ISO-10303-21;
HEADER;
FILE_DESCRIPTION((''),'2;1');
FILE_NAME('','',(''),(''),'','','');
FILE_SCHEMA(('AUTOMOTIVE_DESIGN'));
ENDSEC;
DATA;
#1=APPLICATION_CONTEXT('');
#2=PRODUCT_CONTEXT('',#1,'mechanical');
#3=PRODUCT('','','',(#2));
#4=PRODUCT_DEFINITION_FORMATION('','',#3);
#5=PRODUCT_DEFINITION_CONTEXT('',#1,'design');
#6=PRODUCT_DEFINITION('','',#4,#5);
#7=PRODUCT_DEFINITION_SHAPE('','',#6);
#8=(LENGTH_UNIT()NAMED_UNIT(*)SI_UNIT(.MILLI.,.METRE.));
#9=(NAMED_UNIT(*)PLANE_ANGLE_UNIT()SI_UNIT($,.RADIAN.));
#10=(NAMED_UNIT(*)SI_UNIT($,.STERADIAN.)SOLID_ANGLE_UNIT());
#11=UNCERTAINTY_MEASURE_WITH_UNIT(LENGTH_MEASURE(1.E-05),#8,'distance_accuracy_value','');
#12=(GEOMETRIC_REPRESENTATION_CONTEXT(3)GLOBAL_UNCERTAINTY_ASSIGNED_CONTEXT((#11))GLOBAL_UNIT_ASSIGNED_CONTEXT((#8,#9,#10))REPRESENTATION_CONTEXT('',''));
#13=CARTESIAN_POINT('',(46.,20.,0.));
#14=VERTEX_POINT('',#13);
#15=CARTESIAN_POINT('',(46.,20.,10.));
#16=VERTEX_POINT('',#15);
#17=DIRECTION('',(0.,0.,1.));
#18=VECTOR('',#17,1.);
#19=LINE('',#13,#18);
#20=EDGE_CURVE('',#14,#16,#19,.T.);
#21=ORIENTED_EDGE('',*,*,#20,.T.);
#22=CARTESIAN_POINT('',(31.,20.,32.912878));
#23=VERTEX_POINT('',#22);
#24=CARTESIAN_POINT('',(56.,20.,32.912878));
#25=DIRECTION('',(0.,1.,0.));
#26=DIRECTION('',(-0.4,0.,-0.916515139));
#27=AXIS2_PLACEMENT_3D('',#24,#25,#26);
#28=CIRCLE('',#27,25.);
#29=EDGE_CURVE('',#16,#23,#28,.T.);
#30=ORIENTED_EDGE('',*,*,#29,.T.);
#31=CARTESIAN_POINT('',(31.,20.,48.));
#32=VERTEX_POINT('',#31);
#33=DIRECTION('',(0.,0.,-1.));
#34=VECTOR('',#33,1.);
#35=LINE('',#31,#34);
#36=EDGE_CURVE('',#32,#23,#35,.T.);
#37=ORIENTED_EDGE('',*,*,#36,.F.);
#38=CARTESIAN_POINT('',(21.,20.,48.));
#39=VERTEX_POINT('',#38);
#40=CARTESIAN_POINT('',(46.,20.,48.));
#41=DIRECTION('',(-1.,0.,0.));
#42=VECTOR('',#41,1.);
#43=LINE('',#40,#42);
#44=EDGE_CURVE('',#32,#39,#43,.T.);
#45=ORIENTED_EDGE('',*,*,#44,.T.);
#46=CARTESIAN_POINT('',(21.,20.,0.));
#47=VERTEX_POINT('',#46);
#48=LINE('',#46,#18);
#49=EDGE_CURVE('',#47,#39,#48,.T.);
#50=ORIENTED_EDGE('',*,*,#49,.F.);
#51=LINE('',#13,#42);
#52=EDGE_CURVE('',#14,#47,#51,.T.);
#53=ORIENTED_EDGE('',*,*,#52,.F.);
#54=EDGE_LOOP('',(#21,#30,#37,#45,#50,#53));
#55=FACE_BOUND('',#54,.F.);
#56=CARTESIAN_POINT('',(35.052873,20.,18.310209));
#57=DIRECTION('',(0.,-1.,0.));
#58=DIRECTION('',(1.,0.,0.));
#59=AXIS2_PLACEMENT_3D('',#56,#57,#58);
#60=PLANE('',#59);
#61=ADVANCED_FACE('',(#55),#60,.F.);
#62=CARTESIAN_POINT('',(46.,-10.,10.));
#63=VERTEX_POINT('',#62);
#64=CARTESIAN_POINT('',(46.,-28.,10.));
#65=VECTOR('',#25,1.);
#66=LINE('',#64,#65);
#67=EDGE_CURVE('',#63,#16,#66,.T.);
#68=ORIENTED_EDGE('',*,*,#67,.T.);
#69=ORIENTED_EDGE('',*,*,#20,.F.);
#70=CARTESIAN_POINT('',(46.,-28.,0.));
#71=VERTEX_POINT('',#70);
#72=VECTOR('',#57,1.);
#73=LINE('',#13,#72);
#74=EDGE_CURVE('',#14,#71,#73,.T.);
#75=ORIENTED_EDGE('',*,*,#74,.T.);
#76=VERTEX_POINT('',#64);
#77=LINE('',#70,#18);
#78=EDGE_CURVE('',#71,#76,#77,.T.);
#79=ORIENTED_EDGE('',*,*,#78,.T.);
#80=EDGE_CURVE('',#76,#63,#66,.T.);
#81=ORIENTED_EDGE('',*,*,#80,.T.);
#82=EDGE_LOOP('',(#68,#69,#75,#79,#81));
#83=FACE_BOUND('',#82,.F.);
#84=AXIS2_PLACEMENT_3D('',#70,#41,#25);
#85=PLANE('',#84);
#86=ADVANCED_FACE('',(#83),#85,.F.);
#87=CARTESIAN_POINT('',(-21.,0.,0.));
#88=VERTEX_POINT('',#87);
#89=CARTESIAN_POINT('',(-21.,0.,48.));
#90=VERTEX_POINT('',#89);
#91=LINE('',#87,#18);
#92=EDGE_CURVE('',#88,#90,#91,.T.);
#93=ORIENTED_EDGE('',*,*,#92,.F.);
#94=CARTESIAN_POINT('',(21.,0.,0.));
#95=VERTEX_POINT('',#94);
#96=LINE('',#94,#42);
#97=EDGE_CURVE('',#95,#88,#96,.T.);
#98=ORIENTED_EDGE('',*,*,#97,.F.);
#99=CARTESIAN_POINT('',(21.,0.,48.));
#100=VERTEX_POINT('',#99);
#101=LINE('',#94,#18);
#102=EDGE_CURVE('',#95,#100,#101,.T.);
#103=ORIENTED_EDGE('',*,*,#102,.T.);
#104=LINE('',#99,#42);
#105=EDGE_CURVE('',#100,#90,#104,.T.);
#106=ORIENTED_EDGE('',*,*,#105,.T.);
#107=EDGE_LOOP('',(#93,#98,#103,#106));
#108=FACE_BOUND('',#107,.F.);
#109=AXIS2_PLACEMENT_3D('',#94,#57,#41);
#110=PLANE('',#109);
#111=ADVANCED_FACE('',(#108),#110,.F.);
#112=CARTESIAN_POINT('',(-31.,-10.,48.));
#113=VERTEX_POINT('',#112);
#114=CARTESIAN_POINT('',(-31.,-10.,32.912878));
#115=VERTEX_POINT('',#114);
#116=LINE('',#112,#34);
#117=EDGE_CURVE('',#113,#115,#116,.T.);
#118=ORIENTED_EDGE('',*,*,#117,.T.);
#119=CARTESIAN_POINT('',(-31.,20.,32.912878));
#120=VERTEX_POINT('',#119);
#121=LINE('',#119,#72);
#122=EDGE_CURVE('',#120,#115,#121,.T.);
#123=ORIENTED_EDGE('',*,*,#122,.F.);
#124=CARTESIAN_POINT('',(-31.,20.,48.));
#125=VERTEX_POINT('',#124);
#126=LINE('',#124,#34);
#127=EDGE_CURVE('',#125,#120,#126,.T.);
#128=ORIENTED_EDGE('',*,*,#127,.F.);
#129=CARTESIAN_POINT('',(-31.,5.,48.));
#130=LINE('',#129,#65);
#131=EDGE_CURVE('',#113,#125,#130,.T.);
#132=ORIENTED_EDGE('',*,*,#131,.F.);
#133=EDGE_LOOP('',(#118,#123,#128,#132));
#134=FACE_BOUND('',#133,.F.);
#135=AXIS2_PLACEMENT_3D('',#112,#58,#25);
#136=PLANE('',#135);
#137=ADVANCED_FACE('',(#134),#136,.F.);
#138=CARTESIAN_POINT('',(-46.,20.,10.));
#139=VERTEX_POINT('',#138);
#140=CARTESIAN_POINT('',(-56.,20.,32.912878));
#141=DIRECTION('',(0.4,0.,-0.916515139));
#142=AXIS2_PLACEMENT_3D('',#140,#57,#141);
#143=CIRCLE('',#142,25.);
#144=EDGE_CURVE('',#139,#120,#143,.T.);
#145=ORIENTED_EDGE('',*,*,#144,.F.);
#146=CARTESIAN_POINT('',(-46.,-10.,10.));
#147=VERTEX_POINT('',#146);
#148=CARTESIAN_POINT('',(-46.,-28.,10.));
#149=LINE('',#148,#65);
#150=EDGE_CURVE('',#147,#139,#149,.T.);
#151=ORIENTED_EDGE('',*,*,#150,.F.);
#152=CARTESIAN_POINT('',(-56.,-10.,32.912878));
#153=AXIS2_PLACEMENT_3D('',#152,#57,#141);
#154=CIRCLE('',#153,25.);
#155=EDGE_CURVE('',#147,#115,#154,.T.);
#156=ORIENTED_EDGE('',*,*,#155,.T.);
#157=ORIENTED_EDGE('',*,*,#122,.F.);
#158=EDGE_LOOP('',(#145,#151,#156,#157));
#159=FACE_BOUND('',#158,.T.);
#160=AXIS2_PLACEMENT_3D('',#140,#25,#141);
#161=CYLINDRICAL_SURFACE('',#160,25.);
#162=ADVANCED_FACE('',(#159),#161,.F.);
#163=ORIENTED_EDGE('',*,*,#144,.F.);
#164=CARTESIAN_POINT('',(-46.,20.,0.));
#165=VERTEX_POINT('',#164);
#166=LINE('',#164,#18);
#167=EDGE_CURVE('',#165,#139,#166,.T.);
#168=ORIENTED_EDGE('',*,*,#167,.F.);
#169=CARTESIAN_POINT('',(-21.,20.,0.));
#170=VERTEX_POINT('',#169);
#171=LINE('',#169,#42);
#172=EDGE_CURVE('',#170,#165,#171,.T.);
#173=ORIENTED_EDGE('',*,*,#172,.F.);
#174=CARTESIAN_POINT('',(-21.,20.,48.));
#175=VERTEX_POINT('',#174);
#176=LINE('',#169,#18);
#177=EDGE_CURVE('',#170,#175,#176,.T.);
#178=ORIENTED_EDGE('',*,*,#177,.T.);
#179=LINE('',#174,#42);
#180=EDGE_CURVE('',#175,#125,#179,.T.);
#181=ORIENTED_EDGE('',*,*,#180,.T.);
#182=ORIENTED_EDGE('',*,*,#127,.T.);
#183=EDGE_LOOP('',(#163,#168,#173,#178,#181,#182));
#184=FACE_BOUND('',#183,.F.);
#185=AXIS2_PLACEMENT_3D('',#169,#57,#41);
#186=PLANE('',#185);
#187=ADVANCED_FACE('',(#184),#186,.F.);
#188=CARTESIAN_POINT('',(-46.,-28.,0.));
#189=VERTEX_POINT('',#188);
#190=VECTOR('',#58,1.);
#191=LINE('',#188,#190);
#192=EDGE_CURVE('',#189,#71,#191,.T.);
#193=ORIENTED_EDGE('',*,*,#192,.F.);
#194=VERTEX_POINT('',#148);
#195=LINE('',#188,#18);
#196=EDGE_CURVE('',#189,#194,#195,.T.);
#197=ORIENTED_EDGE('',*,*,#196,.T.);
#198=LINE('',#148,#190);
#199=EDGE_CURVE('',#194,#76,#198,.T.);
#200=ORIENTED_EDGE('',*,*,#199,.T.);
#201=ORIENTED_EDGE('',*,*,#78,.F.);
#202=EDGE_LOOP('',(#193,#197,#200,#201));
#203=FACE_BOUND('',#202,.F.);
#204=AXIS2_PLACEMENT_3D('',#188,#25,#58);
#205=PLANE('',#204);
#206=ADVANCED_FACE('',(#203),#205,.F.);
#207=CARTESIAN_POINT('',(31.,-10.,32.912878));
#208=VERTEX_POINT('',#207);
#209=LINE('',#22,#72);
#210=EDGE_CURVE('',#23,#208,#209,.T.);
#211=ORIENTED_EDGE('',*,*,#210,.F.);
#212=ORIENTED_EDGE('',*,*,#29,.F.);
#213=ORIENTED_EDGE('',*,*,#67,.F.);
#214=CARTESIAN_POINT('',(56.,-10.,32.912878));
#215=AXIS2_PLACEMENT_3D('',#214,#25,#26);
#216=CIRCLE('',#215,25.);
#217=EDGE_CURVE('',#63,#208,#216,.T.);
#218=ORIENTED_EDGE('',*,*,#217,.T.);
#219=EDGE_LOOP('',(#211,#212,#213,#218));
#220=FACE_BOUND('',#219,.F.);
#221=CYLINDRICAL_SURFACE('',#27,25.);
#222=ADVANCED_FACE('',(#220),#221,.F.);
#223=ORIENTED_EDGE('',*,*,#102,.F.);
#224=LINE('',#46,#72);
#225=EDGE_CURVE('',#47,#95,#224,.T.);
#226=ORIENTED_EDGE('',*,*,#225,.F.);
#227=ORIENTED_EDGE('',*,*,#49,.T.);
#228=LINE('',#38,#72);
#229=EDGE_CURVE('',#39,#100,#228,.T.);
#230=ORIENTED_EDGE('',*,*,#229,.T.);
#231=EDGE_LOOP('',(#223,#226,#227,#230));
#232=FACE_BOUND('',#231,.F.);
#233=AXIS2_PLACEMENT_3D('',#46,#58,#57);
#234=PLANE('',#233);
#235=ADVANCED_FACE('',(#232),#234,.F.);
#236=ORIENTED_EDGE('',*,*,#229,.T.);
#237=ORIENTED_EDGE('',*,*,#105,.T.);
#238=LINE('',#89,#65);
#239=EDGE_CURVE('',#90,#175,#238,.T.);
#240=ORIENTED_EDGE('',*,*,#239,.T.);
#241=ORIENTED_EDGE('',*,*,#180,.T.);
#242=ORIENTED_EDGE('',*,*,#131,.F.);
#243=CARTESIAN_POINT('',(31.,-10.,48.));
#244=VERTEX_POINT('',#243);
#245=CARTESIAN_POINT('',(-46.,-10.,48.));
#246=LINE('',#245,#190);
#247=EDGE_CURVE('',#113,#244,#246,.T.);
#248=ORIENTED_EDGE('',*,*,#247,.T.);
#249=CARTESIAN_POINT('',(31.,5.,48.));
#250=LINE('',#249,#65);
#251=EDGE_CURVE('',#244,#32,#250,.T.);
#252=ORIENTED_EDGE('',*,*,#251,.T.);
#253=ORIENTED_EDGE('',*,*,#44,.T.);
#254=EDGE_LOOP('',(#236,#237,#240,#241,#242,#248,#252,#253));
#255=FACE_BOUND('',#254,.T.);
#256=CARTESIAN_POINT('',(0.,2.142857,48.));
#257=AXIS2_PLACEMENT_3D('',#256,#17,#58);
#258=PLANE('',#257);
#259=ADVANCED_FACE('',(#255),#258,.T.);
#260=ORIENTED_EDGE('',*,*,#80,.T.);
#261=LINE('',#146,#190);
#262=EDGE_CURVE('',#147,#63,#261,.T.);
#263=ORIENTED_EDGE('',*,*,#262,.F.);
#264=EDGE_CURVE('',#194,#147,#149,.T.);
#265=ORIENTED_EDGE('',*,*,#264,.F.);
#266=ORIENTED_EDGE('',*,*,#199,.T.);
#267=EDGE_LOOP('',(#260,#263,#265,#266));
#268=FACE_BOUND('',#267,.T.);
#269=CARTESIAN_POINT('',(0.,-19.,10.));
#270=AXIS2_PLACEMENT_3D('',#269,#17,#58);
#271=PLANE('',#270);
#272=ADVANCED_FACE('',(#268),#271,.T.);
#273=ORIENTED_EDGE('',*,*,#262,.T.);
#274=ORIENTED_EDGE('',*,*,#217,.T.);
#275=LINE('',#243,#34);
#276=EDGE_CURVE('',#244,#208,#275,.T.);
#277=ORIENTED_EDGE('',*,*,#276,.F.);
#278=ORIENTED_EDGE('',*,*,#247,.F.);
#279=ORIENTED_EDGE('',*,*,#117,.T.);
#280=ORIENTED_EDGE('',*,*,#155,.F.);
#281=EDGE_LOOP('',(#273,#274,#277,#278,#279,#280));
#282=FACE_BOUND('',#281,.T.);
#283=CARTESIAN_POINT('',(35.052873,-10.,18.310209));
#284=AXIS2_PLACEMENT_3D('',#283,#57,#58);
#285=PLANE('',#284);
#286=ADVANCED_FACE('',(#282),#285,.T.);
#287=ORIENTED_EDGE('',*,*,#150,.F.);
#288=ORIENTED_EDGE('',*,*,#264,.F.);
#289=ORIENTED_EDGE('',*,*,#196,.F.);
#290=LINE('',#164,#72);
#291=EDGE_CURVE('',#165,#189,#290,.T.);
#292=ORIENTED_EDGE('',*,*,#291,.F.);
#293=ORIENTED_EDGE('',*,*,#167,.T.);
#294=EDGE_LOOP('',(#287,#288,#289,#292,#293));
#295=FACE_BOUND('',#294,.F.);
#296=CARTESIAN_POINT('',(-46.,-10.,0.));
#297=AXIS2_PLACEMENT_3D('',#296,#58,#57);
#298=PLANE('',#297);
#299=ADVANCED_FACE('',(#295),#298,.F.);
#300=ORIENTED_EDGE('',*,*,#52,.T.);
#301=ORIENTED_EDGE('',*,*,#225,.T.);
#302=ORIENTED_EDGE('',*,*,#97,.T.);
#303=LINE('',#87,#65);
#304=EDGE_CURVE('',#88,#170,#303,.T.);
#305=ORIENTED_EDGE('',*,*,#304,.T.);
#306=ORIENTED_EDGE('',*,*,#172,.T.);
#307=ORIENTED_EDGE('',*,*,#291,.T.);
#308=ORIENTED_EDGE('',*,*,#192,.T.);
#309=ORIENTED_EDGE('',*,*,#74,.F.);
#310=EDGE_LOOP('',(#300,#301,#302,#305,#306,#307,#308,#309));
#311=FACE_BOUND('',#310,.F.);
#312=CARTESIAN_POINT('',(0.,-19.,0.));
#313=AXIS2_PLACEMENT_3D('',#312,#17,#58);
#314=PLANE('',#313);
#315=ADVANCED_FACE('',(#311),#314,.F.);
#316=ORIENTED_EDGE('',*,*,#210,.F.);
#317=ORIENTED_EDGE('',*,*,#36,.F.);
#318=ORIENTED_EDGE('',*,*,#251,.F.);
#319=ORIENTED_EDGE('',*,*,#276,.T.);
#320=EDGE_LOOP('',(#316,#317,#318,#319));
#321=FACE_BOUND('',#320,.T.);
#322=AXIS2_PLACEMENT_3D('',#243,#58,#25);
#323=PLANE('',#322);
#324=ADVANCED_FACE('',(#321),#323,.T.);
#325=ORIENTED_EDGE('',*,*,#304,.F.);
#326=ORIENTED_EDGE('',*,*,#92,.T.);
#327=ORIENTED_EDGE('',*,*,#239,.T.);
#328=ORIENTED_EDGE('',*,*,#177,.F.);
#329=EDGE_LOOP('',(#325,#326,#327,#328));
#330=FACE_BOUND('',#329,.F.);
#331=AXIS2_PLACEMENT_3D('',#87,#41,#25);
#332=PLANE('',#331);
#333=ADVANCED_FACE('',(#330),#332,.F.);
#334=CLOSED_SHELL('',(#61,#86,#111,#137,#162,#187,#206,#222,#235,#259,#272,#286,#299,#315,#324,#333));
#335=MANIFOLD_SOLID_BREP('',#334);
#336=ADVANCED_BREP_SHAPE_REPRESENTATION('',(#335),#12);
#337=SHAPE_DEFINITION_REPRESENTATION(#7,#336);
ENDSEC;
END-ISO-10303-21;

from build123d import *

# Parameters (mm, degrees)
F0_W        = 15
F0_H        = 30
F1_DEPTH    = 48
F2_DEPTH    = 10
F3_W        = 15
F3_H        = 30
F4_DEPTH    = 38
F5_T1_DEPTH = 30


# Not quite as in the source:
# - a fillet or chamfer that OpenCascade refuses, or shapes differently, is made with other operations: its cross-section is extruded or revolved along the edge and cut away or added


with BuildPart() as f1:
    # F0 (on Top) → F1 (new body)
    with BuildSketch(Plane.XY):
        Polygon((21, 0), (0, 0), (-21, 0), (-21, 20), (-31, 20), (-31, -10), (31, -10), (31, 20), (21, 20), align=None)
        with Locations((38.5, 5)):
            Rectangle(F0_W, F0_H)
        with Locations((-38.5, 5)):
            Rectangle(F0_W, F0_H)
    extrude(amount=F1_DEPTH)

    # F0 (on Top) → F2 (join)
    with BuildSketch(Plane.XY):
        Polygon((46, -10), (31, -10), (-31, -10), (-46, -10), (-46, -28), (46, -28), align=None)
    extrude(amount=F2_DEPTH)

    # F3 (on face) → F4 (cut)
    with BuildSketch(Plane.XY.offset(48)):
        with Locations((-38.5, 5)):
            Rectangle(F3_W, F3_H)
        with Locations((38.5, 5)):
            Rectangle(F3_W, F3_H)
    extrude(amount=-F4_DEPTH, mode=Mode.SUBTRACT)

    # F5: fillet of radius 25 on 2 edges, made by hand

    # F5_s2 → F5_t1 (join)
    with BuildSketch(Plane.XZ.offset(-20)):
        with BuildLine():
            ThreePointArc((46, 10), (35.0834993366, 19.2198145372), (31, 32.9128784748))
            Line((31, 32.9128784748), (31, 10))
            Line((31, 10), (46, 10))
        make_face()
        with BuildLine():
            ThreePointArc((-46, 10), (-35.0834993366, 19.2198145372), (-31, 32.9128784748))
            Line((-31, 32.9128784748), (-31, 10))
            Line((-31, 10), (-46, 10))
        make_face()
    extrude(amount=F5_T1_DEPTH)


solid = f1.part
